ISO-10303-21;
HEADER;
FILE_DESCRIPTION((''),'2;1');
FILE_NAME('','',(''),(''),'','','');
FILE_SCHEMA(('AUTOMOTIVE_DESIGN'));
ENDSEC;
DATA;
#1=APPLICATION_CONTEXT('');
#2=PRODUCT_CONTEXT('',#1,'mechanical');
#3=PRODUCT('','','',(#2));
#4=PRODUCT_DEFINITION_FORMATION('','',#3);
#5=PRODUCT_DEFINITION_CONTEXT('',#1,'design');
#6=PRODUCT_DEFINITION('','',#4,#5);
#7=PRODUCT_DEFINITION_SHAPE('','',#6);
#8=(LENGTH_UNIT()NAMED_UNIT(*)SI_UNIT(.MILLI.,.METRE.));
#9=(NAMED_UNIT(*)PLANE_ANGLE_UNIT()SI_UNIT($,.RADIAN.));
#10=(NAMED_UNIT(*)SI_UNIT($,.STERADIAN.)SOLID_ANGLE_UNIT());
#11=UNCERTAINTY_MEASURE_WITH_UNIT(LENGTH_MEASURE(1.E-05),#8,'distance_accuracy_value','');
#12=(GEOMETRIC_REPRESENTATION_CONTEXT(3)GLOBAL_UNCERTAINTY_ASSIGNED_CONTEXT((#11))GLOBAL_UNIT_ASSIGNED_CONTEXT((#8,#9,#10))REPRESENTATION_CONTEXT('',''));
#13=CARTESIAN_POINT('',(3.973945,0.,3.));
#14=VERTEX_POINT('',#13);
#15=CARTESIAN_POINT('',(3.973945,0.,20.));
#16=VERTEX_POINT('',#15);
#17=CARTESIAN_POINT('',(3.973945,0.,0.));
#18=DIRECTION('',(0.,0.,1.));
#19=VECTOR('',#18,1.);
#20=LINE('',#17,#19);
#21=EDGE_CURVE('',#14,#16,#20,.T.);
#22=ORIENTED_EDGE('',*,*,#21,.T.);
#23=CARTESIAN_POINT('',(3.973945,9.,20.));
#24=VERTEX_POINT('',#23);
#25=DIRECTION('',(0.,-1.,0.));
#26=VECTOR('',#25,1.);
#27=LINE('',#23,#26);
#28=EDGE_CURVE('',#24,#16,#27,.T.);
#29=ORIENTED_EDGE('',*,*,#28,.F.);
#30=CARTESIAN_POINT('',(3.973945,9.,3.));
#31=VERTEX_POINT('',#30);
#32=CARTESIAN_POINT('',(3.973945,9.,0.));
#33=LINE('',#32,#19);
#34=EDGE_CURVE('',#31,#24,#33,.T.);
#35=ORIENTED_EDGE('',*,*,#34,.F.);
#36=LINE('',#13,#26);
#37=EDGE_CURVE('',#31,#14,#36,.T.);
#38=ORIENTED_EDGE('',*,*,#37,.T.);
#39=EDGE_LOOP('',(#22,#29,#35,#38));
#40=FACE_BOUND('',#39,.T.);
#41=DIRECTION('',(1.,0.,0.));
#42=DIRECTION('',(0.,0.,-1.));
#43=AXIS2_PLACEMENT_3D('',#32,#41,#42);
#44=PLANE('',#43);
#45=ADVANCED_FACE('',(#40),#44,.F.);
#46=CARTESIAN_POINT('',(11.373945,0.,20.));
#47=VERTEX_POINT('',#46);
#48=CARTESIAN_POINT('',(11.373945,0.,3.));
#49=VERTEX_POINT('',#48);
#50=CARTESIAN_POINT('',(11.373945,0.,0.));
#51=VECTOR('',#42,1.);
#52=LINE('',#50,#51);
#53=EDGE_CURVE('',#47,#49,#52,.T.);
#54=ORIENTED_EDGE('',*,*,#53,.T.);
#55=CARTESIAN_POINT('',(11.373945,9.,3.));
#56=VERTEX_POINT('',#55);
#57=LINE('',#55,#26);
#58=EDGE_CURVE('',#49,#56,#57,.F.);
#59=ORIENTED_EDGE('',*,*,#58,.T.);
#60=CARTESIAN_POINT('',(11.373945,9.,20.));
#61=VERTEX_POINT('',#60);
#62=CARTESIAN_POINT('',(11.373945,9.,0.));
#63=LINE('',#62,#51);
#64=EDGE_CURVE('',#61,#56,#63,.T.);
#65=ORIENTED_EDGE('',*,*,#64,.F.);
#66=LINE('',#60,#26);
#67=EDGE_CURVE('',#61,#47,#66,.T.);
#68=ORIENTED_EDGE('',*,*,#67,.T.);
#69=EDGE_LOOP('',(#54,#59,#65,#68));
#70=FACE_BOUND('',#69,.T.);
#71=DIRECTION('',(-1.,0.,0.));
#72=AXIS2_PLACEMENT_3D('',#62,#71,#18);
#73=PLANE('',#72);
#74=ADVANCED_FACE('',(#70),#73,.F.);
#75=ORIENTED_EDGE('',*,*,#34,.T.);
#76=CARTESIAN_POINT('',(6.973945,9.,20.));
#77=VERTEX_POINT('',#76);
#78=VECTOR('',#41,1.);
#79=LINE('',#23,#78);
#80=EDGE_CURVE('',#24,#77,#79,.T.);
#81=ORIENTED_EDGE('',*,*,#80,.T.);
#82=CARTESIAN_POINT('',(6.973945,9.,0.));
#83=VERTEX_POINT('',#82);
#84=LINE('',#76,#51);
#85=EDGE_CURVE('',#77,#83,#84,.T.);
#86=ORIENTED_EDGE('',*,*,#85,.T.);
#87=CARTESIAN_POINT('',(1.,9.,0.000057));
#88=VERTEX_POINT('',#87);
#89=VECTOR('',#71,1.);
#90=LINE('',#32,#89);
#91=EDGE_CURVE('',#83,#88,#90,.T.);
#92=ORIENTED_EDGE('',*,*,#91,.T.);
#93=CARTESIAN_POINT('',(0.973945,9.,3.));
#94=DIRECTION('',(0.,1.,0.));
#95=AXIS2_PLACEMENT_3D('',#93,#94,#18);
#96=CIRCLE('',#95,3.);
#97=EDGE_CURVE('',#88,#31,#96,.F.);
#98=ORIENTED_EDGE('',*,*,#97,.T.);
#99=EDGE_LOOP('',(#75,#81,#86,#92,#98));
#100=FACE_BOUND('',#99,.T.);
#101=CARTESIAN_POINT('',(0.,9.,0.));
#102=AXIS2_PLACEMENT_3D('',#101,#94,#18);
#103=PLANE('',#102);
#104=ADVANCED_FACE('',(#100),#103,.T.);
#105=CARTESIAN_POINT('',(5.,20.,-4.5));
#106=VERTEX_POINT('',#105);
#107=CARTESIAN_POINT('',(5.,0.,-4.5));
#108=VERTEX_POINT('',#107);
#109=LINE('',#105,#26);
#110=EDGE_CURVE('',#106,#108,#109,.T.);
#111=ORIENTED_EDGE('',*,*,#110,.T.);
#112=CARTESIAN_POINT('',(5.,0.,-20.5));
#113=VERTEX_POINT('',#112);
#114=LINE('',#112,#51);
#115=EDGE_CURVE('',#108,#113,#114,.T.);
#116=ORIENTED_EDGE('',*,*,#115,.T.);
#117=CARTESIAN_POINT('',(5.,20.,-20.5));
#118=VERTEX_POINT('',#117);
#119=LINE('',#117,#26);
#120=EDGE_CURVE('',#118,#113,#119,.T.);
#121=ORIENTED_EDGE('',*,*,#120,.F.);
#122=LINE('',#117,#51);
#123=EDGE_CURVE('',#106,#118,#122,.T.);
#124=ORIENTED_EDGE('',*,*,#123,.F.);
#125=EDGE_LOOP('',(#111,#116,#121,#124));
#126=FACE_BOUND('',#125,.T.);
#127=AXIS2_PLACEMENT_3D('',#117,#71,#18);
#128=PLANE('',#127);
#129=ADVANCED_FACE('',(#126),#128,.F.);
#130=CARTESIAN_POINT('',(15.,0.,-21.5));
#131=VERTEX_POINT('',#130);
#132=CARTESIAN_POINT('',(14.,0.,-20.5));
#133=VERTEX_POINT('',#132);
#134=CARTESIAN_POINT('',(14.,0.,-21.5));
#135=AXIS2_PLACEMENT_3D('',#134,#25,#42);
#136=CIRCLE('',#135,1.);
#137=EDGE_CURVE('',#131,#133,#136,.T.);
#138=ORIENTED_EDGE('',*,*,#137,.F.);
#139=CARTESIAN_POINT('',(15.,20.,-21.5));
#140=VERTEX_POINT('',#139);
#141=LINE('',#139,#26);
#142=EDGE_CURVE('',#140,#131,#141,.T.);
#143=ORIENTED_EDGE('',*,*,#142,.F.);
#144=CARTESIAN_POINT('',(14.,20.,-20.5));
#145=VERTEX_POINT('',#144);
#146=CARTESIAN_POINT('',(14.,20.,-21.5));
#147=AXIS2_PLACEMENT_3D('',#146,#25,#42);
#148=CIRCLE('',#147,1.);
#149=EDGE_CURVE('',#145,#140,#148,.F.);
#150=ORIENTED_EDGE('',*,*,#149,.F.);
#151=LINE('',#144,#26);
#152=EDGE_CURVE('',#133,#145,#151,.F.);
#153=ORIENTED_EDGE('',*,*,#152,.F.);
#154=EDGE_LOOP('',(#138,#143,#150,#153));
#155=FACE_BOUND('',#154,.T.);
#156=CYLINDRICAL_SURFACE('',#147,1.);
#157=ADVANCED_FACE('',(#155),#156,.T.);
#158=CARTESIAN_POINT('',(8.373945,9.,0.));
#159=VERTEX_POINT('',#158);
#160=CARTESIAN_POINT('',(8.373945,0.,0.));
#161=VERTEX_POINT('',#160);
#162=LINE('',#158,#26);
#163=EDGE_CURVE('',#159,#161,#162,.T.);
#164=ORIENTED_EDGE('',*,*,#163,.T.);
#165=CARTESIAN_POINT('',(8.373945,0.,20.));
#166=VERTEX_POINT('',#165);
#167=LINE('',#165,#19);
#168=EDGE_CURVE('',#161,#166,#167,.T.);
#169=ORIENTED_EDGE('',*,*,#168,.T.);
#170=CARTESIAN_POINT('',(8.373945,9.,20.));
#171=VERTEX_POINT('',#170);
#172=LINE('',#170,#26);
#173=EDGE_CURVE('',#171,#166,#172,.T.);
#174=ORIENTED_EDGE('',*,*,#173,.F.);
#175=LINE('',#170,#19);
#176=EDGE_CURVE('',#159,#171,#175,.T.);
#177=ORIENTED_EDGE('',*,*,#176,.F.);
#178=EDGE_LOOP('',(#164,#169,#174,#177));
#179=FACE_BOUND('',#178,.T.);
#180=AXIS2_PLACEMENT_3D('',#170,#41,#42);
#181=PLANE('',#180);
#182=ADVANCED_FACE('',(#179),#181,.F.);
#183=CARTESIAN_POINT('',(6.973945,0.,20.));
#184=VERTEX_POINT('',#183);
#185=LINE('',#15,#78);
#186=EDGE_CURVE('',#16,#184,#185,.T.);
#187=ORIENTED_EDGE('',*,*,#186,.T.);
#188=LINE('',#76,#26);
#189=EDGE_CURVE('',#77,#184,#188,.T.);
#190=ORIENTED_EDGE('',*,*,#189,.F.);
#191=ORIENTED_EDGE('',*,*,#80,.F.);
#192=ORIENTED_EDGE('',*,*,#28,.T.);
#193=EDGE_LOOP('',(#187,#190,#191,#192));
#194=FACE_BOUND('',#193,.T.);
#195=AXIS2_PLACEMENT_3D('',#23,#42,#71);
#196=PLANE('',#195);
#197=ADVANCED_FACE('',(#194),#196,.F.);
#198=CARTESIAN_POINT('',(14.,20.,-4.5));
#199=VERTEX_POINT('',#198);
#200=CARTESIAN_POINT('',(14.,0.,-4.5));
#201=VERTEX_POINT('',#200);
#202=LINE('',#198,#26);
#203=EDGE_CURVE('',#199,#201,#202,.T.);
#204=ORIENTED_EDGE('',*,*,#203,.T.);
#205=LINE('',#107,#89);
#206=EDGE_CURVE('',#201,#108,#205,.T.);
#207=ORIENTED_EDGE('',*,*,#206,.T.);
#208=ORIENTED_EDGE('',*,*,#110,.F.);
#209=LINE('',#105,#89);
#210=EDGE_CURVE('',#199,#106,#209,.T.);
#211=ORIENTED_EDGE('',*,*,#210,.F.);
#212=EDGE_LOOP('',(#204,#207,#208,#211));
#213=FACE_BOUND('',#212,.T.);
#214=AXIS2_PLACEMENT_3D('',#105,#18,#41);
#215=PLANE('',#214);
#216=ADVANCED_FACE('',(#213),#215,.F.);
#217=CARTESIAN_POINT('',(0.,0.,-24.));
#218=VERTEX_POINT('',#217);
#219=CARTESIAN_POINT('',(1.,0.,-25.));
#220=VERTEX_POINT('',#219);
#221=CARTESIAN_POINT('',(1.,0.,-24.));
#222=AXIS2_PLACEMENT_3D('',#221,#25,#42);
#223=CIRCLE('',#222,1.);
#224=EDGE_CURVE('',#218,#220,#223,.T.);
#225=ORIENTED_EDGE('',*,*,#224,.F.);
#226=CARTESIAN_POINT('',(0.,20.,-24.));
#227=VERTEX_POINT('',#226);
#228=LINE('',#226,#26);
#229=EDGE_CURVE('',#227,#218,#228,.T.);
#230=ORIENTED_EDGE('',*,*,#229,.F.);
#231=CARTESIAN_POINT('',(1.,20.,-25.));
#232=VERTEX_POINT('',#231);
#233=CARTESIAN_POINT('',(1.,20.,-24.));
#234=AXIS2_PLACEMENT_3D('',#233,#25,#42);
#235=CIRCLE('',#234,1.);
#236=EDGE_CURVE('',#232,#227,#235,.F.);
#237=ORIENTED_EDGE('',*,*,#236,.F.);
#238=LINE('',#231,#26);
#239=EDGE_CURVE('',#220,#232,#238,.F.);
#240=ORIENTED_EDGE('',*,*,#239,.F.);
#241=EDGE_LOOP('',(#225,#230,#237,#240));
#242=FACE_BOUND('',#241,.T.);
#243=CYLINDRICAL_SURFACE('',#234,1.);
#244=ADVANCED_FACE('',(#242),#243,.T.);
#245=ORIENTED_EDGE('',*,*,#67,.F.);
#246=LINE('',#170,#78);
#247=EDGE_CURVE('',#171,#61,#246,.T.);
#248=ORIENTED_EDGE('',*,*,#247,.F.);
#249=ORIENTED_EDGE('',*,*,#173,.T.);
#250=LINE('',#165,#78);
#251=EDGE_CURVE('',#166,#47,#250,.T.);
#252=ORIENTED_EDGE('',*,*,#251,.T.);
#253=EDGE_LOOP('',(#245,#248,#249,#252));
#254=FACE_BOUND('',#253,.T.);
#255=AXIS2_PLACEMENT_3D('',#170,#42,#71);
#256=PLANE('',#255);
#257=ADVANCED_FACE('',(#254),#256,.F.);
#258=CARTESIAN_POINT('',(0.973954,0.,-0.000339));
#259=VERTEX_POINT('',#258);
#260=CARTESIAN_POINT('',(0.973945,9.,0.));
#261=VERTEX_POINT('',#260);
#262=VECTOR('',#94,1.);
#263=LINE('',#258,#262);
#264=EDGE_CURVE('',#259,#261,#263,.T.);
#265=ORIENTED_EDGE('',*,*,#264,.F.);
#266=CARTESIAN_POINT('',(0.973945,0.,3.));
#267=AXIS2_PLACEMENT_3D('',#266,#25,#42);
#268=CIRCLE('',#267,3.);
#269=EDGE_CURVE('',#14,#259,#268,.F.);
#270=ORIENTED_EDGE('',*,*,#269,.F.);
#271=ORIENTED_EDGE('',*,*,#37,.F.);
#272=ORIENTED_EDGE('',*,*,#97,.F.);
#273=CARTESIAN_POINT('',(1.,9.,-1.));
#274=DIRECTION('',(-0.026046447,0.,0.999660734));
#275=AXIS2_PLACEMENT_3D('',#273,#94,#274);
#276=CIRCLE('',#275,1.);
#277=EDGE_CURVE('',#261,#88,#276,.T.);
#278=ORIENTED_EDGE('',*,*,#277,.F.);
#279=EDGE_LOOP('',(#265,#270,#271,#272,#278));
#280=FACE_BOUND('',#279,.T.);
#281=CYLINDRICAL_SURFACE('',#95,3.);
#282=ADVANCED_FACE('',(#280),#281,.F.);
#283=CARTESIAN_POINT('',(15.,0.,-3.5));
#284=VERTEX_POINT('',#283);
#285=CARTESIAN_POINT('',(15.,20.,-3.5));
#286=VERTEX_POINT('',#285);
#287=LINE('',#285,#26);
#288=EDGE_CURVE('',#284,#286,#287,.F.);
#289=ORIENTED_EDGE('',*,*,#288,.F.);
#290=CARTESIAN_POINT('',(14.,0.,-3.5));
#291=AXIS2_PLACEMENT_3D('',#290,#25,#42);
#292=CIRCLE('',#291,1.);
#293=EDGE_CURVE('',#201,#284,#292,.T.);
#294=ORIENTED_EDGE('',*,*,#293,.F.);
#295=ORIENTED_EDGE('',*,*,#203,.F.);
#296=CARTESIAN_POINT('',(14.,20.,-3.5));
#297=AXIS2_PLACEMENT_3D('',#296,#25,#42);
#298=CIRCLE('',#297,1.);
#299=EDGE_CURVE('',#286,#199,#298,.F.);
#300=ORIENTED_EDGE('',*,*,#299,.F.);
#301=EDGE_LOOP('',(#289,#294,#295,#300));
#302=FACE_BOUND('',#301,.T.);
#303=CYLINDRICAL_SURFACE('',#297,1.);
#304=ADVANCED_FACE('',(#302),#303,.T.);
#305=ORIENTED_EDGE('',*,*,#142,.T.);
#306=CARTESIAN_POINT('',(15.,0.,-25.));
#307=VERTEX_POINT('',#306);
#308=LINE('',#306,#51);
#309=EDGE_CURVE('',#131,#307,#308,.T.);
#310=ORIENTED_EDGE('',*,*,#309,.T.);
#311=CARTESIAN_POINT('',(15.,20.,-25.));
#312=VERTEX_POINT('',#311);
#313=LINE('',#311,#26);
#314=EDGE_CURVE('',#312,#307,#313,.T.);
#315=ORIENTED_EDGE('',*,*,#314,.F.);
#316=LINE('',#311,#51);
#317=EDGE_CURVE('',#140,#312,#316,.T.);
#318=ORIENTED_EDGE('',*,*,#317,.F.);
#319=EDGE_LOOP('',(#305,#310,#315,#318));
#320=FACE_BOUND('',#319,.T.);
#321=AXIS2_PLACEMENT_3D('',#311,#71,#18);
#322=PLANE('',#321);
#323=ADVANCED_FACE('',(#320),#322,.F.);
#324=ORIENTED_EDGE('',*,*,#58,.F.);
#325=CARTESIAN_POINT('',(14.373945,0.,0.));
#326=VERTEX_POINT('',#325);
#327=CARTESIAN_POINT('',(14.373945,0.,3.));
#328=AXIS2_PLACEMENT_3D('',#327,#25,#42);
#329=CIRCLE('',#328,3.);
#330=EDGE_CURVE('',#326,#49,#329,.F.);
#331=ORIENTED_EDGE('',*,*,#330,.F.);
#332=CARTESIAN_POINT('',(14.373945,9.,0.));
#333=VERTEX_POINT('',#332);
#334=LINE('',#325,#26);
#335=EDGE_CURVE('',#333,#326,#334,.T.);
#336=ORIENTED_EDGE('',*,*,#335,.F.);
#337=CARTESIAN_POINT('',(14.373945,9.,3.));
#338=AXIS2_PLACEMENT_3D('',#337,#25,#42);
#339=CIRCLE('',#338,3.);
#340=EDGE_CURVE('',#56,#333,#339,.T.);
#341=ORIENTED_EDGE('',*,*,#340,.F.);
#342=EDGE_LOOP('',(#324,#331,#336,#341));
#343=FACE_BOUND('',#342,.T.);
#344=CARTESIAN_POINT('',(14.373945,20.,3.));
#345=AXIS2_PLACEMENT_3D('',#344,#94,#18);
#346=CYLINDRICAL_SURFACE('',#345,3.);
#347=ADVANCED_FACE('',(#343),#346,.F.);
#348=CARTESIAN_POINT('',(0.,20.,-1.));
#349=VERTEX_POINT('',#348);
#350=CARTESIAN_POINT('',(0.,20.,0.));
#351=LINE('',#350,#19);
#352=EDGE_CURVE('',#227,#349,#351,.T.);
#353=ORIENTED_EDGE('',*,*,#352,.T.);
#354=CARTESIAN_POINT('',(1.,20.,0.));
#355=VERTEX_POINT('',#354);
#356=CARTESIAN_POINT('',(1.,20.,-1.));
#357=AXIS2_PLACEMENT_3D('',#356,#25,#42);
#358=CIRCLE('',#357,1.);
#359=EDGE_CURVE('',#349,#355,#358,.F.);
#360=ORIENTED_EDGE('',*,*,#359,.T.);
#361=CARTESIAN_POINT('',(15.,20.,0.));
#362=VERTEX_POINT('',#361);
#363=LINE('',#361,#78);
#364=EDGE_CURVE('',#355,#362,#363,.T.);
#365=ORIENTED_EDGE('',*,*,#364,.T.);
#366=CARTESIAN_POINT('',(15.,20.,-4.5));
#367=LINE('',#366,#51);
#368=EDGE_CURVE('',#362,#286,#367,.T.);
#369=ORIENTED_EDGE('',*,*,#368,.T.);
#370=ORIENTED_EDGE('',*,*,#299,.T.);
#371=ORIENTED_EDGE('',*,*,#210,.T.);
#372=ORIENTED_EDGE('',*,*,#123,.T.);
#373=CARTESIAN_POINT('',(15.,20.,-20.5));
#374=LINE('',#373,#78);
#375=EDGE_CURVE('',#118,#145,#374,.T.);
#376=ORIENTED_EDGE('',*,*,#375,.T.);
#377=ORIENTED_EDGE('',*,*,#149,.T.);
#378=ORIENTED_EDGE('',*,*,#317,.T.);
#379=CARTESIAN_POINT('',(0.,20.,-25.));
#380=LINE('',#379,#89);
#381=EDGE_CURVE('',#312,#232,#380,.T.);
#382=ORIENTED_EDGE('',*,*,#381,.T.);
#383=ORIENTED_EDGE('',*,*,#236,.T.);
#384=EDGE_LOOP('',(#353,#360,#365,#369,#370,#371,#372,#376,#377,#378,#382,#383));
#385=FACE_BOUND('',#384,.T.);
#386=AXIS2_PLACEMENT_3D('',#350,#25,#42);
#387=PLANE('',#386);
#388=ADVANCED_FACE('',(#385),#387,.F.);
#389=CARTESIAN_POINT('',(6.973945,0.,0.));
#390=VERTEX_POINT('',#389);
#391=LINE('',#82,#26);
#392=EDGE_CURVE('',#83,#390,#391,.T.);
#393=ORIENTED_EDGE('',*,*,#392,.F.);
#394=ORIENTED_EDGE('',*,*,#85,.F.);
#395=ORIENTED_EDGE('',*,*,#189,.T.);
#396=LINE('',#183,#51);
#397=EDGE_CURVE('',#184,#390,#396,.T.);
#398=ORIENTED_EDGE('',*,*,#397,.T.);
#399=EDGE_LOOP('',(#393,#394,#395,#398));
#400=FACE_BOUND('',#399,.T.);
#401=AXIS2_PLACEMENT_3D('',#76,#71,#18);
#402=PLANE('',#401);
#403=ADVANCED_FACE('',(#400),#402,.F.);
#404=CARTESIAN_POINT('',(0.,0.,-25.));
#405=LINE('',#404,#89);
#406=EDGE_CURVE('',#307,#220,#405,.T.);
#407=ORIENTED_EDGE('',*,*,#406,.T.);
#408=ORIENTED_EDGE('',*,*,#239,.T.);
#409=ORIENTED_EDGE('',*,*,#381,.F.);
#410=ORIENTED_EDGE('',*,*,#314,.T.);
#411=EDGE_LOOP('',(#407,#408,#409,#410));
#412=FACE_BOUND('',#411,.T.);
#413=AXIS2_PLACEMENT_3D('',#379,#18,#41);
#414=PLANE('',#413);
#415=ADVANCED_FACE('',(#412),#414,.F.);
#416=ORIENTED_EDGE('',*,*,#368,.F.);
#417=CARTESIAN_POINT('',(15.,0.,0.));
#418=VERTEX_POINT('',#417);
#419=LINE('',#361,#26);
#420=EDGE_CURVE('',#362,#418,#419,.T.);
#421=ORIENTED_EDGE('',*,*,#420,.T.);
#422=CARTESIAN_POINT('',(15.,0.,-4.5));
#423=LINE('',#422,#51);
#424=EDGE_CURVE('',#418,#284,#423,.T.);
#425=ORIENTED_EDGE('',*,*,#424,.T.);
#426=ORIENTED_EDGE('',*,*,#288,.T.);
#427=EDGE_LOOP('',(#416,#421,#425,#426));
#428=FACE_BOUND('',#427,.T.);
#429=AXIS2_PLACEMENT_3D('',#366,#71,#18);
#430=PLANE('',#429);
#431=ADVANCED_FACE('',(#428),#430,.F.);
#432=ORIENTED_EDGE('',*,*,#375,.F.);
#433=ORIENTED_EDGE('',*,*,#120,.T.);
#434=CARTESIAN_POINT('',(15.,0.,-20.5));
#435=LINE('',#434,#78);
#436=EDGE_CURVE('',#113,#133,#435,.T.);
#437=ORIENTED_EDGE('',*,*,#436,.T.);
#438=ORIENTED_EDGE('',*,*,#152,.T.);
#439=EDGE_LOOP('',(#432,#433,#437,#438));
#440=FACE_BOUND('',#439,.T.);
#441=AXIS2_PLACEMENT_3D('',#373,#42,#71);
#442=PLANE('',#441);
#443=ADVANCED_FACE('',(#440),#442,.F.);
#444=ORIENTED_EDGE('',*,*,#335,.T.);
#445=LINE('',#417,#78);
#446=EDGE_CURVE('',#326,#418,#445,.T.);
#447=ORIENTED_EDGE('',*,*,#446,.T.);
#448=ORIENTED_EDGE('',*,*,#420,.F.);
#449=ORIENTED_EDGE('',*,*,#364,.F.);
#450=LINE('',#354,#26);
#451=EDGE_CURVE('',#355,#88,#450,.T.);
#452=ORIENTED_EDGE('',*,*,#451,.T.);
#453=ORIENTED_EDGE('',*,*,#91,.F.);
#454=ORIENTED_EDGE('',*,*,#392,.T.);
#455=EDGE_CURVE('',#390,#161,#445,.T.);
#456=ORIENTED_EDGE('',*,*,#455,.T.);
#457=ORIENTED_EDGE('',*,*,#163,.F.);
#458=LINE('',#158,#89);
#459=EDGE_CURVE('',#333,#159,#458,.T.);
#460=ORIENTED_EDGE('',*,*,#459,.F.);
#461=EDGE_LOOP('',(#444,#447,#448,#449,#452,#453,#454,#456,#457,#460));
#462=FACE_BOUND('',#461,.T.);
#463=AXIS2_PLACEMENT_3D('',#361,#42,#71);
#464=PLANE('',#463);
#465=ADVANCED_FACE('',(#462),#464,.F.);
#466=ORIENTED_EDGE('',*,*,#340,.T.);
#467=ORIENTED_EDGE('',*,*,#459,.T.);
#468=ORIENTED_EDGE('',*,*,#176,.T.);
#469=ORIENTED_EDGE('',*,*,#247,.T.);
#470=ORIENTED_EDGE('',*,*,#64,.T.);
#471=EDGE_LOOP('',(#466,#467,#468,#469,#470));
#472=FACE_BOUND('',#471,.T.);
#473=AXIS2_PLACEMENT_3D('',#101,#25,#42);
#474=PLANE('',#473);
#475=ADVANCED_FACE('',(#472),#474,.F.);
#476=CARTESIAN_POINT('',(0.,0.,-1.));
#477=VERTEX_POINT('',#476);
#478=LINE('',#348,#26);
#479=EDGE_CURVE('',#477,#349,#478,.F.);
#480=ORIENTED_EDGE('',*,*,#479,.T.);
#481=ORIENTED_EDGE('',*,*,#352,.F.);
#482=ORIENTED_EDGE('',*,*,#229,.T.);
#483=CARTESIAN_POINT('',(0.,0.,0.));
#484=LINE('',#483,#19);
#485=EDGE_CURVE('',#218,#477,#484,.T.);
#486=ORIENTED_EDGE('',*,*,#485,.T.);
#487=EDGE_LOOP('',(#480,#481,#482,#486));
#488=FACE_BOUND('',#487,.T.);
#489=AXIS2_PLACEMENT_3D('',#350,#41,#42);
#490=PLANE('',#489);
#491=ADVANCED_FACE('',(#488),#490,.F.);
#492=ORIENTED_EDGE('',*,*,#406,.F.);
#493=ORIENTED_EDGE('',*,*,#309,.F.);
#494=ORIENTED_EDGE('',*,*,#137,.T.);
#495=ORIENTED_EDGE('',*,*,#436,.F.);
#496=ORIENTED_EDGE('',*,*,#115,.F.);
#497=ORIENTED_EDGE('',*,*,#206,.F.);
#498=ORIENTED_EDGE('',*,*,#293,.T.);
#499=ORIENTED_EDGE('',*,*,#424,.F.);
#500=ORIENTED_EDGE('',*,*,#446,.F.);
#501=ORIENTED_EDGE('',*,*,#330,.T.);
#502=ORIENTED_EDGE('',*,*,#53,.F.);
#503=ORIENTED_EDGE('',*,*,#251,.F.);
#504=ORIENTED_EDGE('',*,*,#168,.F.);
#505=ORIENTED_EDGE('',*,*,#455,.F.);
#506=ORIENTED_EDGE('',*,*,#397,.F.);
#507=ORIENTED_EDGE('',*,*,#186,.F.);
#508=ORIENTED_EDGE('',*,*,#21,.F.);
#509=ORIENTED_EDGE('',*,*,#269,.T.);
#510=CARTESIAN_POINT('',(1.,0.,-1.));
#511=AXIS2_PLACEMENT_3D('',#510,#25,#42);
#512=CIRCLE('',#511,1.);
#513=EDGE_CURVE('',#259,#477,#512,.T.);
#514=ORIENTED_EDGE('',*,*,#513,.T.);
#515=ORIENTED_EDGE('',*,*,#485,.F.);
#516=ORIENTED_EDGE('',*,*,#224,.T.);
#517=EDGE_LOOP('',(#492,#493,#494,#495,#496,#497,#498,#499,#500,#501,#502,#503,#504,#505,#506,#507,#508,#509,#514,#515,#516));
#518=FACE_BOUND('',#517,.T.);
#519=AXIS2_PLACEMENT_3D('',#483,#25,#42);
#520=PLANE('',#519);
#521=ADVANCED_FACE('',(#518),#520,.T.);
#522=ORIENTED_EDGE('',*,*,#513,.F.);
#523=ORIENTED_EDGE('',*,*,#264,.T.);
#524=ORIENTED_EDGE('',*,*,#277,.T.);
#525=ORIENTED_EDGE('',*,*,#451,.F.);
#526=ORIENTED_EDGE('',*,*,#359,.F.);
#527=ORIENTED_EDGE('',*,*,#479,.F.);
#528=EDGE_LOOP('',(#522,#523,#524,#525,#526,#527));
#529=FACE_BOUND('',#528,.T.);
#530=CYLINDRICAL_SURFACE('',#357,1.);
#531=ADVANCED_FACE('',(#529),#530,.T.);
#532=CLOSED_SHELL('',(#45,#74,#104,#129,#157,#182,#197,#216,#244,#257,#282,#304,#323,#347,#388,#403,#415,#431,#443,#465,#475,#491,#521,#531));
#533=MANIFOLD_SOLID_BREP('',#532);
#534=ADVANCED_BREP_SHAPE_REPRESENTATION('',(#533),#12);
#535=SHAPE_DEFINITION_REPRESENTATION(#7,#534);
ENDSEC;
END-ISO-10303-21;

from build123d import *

# Parameters (mm, degrees)
BOSS_EXTRUDE1_DEPTH = 20
SKETCH2_W           = 3
SKETCH2_H           = 20
BOSS_EXTRUDE2_DEPTH = 9
FILLET1_R           = 3
FILLET2_R           = 1
FILLET3_R           = 1


with BuildPart() as part:
    # Sketch1 → Boss-Extrude1 (new body)
    with BuildSketch(Plane(origin=(0, 0, 0), x_dir=(1, 0, 0), z_dir=(0, 1, 0))):
        Polygon((0, 0), (0, 25), (15, 25), (15, 20.5), (5, 20.5), (5, 4.5), (15, 4.5), (15, 0), align=None)
    extrude(amount=BOSS_EXTRUDE1_DEPTH)

    # Sketch2 → Boss-Extrude2 (add)
    with BuildSketch(Plane(origin=(0, 0, 0), x_dir=(1, 0, 0), z_dir=(0, 1, 0))):
        with Locations((5.473944713, -10)):
            Rectangle(SKETCH2_W, SKETCH2_H)
        with Locations((9.873944713, -10)):
            Rectangle(SKETCH2_W, SKETCH2_H)
    extrude(amount=BOSS_EXTRUDE2_DEPTH)

    # Fillet1
    fillet1_edges = [part.edges().sort_by_distance(p)[0] for p in [
        (3.973944713, 4.5, 0),
        (11.373944713, 4.5, 0),
    ]]
    fillet(fillet1_edges, radius=FILLET1_R)

    # Fillet2
    fillet2_edges = [part.edges().sort_by_distance(p)[0] for p in [
        (15, 10, -20.5),
        (15, 10, -4.5),
    ]]
    fillet(fillet2_edges, radius=FILLET2_R)

    # Fillet3
    # the kernel refuses this fillet: 1 mm, written as the material it takes off along each edge
    with BuildSketch(Plane(origin=(0, -2.5, -25), x_dir=(1, 0, 0), z_dir=(0, 1, 0))) as fillet3_piece_1:
        with BuildLine():
            CenterArc((FILLET3_R, -FILLET3_R), FILLET3_R, 90, 90)
            Line((0, -FILLET3_R), (0, 0))
            Line((0, 0), (FILLET3_R, 0))
        make_face()
    extrude(amount=25, mode=Mode.SUBTRACT)
    with BuildSketch(Plane(origin=(0, -2.499787848, 0), x_dir=(0.9999999979479802, 0, 6.406277746226832e-05), z_dir=(0, 1, 0))) as fillet3_piece_2:
        with BuildLine():
            CenterArc((0.999935941, 0.9999792), FILLET3_R, 180.003670527, 89.626782871)
            Line((-6.4057e-05, 0.999915137), (-0.100064057, 0.999908731))
            Line((-0.100064057, 0.999908731), (-0.1, -6.406e-06))
            Line((-0.1, -6.406e-06), (6.406e-06, -0.1))
            ThreePointArc((6.406e-06, -0.1), (0.973951118, -0.099937606), (0.992841204, -0.09999792))
            Line((0.992841204, -0.09999792), (0.99348618, 0))
        make_face()
    extrude(amount=11.499787747, mode=Mode.SUBTRACT)
    with BuildSketch(Plane(origin=(0, 8.999999898, 0), x_dir=(1, 0, 0), z_dir=(0, 1, 0))) as fillet3_piece_3:
        with BuildLine():
            CenterArc((FILLET3_R, FILLET3_R), FILLET3_R, 180, 90)
            Line((0, FILLET3_R), (0, 0))
            Line((0, 0), (FILLET3_R, 0))
        make_face()
    extrude(amount=13.500000102, mode=Mode.SUBTRACT)


solid = part.part
